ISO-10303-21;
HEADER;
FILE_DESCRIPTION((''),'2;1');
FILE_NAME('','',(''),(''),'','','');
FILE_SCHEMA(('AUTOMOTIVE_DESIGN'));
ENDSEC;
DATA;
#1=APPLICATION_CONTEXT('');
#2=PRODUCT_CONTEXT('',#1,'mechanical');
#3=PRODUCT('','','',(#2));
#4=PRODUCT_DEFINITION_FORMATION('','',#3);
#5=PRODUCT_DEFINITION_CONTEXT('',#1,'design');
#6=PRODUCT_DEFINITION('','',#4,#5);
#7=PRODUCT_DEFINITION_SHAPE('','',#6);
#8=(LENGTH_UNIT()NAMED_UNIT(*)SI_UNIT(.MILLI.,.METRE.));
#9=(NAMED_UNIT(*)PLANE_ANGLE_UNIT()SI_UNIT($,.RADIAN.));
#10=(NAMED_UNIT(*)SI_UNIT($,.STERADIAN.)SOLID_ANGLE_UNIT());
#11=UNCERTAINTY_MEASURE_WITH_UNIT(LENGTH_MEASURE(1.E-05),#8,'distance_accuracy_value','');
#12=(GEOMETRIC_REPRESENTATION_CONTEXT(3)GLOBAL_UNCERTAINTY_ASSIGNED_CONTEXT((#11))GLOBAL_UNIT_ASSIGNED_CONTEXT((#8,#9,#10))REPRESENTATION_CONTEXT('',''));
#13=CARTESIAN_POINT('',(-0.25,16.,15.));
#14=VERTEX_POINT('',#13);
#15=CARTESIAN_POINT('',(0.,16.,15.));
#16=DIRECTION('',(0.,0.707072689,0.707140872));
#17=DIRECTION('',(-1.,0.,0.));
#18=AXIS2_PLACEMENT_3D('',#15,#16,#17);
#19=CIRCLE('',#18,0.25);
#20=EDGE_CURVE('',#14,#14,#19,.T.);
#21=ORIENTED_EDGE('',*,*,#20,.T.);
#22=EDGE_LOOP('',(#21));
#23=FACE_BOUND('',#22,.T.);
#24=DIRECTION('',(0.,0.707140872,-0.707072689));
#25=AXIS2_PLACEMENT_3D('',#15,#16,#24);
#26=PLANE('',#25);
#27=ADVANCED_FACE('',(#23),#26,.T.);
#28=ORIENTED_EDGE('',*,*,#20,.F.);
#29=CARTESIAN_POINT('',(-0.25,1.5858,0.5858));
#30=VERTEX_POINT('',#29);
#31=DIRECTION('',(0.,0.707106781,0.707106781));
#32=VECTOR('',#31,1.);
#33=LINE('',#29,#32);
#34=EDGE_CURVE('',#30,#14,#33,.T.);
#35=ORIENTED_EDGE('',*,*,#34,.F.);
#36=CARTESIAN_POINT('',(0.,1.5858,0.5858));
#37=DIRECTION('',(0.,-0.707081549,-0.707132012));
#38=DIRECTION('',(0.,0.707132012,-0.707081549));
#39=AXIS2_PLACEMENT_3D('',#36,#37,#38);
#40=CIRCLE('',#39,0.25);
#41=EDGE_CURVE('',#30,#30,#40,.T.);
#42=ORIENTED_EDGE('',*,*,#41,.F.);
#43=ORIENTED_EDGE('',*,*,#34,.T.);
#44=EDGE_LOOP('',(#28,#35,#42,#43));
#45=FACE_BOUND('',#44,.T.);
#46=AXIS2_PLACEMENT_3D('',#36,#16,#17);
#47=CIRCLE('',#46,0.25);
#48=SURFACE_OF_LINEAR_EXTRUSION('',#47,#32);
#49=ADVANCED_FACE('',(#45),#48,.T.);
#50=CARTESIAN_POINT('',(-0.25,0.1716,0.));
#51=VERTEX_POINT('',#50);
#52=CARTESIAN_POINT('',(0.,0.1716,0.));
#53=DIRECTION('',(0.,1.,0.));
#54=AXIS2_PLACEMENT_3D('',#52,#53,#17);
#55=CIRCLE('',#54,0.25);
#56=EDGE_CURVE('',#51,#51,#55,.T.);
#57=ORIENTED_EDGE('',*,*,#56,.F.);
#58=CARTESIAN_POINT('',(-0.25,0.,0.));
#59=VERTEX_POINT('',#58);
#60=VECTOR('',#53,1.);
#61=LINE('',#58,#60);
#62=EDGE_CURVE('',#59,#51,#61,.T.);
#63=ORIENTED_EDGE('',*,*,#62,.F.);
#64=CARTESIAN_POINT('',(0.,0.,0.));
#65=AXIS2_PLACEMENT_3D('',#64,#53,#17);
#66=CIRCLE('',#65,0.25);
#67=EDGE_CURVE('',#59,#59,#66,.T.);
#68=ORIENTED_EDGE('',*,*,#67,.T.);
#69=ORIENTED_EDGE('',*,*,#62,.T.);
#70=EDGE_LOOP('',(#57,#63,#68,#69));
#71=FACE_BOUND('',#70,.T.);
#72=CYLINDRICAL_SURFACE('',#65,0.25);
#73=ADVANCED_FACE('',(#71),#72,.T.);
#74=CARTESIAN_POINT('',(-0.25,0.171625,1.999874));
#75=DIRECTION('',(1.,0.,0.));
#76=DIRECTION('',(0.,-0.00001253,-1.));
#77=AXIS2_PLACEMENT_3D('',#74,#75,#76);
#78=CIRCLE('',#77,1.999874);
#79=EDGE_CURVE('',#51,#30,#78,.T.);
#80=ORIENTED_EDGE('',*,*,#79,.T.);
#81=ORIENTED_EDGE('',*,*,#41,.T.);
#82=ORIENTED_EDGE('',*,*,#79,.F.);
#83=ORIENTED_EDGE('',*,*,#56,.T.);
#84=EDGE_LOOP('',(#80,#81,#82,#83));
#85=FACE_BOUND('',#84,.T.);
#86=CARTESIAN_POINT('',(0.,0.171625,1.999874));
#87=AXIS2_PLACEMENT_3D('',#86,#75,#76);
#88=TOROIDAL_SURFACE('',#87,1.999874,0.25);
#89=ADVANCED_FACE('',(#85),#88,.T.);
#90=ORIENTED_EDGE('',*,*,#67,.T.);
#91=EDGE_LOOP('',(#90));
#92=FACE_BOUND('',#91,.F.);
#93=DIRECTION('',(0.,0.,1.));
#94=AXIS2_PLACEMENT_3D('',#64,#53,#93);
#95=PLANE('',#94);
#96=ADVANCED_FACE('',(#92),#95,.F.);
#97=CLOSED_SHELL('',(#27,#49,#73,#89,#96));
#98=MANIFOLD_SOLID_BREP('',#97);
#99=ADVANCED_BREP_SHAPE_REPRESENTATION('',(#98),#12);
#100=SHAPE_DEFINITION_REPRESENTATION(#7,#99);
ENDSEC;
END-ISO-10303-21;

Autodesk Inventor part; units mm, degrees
ref_plane "YZ Plane" through (0, 0, 0) normal (1, 0, 0) x (0, 1, 0)
ref_plane "XZ Plane" through (0, 0, 0) normal (0, 1, 0) x (-1, 0, 0)
ref_plane "XY Plane" through (0, 0, 0) normal (0, 0, 1) x (1, 0, 0)
sketch "Sketch1" plane through (0, 0, 0) normal (0, 1, 0) x (-1, 0, 0)
  circle A0 centre (0, 0) radius 0.25
  dimension "d0" = 0.5
sketch "Sketch2" plane through (0, 0, 0) normal (1, 0, 0) x (0, 1, 0)
  line L0 (0, 0) -> (0.1716, 0)
  line L1 (1.5858, 0.5858) -> (16, 15)
  arc A0 (0.1716, 0) -> (1.5858, 0.5858) centre (0.1716, 2) ccw
  point P0 (1, 0)
  dimension "d1" = 1
  dimension "d2" = 135
  dimension "d3" = 15
  dimension "d9" = 2
sweep "Sweep3" add profiles "Sketch1" path "Sketch2"
properties part number "cable 45°"
